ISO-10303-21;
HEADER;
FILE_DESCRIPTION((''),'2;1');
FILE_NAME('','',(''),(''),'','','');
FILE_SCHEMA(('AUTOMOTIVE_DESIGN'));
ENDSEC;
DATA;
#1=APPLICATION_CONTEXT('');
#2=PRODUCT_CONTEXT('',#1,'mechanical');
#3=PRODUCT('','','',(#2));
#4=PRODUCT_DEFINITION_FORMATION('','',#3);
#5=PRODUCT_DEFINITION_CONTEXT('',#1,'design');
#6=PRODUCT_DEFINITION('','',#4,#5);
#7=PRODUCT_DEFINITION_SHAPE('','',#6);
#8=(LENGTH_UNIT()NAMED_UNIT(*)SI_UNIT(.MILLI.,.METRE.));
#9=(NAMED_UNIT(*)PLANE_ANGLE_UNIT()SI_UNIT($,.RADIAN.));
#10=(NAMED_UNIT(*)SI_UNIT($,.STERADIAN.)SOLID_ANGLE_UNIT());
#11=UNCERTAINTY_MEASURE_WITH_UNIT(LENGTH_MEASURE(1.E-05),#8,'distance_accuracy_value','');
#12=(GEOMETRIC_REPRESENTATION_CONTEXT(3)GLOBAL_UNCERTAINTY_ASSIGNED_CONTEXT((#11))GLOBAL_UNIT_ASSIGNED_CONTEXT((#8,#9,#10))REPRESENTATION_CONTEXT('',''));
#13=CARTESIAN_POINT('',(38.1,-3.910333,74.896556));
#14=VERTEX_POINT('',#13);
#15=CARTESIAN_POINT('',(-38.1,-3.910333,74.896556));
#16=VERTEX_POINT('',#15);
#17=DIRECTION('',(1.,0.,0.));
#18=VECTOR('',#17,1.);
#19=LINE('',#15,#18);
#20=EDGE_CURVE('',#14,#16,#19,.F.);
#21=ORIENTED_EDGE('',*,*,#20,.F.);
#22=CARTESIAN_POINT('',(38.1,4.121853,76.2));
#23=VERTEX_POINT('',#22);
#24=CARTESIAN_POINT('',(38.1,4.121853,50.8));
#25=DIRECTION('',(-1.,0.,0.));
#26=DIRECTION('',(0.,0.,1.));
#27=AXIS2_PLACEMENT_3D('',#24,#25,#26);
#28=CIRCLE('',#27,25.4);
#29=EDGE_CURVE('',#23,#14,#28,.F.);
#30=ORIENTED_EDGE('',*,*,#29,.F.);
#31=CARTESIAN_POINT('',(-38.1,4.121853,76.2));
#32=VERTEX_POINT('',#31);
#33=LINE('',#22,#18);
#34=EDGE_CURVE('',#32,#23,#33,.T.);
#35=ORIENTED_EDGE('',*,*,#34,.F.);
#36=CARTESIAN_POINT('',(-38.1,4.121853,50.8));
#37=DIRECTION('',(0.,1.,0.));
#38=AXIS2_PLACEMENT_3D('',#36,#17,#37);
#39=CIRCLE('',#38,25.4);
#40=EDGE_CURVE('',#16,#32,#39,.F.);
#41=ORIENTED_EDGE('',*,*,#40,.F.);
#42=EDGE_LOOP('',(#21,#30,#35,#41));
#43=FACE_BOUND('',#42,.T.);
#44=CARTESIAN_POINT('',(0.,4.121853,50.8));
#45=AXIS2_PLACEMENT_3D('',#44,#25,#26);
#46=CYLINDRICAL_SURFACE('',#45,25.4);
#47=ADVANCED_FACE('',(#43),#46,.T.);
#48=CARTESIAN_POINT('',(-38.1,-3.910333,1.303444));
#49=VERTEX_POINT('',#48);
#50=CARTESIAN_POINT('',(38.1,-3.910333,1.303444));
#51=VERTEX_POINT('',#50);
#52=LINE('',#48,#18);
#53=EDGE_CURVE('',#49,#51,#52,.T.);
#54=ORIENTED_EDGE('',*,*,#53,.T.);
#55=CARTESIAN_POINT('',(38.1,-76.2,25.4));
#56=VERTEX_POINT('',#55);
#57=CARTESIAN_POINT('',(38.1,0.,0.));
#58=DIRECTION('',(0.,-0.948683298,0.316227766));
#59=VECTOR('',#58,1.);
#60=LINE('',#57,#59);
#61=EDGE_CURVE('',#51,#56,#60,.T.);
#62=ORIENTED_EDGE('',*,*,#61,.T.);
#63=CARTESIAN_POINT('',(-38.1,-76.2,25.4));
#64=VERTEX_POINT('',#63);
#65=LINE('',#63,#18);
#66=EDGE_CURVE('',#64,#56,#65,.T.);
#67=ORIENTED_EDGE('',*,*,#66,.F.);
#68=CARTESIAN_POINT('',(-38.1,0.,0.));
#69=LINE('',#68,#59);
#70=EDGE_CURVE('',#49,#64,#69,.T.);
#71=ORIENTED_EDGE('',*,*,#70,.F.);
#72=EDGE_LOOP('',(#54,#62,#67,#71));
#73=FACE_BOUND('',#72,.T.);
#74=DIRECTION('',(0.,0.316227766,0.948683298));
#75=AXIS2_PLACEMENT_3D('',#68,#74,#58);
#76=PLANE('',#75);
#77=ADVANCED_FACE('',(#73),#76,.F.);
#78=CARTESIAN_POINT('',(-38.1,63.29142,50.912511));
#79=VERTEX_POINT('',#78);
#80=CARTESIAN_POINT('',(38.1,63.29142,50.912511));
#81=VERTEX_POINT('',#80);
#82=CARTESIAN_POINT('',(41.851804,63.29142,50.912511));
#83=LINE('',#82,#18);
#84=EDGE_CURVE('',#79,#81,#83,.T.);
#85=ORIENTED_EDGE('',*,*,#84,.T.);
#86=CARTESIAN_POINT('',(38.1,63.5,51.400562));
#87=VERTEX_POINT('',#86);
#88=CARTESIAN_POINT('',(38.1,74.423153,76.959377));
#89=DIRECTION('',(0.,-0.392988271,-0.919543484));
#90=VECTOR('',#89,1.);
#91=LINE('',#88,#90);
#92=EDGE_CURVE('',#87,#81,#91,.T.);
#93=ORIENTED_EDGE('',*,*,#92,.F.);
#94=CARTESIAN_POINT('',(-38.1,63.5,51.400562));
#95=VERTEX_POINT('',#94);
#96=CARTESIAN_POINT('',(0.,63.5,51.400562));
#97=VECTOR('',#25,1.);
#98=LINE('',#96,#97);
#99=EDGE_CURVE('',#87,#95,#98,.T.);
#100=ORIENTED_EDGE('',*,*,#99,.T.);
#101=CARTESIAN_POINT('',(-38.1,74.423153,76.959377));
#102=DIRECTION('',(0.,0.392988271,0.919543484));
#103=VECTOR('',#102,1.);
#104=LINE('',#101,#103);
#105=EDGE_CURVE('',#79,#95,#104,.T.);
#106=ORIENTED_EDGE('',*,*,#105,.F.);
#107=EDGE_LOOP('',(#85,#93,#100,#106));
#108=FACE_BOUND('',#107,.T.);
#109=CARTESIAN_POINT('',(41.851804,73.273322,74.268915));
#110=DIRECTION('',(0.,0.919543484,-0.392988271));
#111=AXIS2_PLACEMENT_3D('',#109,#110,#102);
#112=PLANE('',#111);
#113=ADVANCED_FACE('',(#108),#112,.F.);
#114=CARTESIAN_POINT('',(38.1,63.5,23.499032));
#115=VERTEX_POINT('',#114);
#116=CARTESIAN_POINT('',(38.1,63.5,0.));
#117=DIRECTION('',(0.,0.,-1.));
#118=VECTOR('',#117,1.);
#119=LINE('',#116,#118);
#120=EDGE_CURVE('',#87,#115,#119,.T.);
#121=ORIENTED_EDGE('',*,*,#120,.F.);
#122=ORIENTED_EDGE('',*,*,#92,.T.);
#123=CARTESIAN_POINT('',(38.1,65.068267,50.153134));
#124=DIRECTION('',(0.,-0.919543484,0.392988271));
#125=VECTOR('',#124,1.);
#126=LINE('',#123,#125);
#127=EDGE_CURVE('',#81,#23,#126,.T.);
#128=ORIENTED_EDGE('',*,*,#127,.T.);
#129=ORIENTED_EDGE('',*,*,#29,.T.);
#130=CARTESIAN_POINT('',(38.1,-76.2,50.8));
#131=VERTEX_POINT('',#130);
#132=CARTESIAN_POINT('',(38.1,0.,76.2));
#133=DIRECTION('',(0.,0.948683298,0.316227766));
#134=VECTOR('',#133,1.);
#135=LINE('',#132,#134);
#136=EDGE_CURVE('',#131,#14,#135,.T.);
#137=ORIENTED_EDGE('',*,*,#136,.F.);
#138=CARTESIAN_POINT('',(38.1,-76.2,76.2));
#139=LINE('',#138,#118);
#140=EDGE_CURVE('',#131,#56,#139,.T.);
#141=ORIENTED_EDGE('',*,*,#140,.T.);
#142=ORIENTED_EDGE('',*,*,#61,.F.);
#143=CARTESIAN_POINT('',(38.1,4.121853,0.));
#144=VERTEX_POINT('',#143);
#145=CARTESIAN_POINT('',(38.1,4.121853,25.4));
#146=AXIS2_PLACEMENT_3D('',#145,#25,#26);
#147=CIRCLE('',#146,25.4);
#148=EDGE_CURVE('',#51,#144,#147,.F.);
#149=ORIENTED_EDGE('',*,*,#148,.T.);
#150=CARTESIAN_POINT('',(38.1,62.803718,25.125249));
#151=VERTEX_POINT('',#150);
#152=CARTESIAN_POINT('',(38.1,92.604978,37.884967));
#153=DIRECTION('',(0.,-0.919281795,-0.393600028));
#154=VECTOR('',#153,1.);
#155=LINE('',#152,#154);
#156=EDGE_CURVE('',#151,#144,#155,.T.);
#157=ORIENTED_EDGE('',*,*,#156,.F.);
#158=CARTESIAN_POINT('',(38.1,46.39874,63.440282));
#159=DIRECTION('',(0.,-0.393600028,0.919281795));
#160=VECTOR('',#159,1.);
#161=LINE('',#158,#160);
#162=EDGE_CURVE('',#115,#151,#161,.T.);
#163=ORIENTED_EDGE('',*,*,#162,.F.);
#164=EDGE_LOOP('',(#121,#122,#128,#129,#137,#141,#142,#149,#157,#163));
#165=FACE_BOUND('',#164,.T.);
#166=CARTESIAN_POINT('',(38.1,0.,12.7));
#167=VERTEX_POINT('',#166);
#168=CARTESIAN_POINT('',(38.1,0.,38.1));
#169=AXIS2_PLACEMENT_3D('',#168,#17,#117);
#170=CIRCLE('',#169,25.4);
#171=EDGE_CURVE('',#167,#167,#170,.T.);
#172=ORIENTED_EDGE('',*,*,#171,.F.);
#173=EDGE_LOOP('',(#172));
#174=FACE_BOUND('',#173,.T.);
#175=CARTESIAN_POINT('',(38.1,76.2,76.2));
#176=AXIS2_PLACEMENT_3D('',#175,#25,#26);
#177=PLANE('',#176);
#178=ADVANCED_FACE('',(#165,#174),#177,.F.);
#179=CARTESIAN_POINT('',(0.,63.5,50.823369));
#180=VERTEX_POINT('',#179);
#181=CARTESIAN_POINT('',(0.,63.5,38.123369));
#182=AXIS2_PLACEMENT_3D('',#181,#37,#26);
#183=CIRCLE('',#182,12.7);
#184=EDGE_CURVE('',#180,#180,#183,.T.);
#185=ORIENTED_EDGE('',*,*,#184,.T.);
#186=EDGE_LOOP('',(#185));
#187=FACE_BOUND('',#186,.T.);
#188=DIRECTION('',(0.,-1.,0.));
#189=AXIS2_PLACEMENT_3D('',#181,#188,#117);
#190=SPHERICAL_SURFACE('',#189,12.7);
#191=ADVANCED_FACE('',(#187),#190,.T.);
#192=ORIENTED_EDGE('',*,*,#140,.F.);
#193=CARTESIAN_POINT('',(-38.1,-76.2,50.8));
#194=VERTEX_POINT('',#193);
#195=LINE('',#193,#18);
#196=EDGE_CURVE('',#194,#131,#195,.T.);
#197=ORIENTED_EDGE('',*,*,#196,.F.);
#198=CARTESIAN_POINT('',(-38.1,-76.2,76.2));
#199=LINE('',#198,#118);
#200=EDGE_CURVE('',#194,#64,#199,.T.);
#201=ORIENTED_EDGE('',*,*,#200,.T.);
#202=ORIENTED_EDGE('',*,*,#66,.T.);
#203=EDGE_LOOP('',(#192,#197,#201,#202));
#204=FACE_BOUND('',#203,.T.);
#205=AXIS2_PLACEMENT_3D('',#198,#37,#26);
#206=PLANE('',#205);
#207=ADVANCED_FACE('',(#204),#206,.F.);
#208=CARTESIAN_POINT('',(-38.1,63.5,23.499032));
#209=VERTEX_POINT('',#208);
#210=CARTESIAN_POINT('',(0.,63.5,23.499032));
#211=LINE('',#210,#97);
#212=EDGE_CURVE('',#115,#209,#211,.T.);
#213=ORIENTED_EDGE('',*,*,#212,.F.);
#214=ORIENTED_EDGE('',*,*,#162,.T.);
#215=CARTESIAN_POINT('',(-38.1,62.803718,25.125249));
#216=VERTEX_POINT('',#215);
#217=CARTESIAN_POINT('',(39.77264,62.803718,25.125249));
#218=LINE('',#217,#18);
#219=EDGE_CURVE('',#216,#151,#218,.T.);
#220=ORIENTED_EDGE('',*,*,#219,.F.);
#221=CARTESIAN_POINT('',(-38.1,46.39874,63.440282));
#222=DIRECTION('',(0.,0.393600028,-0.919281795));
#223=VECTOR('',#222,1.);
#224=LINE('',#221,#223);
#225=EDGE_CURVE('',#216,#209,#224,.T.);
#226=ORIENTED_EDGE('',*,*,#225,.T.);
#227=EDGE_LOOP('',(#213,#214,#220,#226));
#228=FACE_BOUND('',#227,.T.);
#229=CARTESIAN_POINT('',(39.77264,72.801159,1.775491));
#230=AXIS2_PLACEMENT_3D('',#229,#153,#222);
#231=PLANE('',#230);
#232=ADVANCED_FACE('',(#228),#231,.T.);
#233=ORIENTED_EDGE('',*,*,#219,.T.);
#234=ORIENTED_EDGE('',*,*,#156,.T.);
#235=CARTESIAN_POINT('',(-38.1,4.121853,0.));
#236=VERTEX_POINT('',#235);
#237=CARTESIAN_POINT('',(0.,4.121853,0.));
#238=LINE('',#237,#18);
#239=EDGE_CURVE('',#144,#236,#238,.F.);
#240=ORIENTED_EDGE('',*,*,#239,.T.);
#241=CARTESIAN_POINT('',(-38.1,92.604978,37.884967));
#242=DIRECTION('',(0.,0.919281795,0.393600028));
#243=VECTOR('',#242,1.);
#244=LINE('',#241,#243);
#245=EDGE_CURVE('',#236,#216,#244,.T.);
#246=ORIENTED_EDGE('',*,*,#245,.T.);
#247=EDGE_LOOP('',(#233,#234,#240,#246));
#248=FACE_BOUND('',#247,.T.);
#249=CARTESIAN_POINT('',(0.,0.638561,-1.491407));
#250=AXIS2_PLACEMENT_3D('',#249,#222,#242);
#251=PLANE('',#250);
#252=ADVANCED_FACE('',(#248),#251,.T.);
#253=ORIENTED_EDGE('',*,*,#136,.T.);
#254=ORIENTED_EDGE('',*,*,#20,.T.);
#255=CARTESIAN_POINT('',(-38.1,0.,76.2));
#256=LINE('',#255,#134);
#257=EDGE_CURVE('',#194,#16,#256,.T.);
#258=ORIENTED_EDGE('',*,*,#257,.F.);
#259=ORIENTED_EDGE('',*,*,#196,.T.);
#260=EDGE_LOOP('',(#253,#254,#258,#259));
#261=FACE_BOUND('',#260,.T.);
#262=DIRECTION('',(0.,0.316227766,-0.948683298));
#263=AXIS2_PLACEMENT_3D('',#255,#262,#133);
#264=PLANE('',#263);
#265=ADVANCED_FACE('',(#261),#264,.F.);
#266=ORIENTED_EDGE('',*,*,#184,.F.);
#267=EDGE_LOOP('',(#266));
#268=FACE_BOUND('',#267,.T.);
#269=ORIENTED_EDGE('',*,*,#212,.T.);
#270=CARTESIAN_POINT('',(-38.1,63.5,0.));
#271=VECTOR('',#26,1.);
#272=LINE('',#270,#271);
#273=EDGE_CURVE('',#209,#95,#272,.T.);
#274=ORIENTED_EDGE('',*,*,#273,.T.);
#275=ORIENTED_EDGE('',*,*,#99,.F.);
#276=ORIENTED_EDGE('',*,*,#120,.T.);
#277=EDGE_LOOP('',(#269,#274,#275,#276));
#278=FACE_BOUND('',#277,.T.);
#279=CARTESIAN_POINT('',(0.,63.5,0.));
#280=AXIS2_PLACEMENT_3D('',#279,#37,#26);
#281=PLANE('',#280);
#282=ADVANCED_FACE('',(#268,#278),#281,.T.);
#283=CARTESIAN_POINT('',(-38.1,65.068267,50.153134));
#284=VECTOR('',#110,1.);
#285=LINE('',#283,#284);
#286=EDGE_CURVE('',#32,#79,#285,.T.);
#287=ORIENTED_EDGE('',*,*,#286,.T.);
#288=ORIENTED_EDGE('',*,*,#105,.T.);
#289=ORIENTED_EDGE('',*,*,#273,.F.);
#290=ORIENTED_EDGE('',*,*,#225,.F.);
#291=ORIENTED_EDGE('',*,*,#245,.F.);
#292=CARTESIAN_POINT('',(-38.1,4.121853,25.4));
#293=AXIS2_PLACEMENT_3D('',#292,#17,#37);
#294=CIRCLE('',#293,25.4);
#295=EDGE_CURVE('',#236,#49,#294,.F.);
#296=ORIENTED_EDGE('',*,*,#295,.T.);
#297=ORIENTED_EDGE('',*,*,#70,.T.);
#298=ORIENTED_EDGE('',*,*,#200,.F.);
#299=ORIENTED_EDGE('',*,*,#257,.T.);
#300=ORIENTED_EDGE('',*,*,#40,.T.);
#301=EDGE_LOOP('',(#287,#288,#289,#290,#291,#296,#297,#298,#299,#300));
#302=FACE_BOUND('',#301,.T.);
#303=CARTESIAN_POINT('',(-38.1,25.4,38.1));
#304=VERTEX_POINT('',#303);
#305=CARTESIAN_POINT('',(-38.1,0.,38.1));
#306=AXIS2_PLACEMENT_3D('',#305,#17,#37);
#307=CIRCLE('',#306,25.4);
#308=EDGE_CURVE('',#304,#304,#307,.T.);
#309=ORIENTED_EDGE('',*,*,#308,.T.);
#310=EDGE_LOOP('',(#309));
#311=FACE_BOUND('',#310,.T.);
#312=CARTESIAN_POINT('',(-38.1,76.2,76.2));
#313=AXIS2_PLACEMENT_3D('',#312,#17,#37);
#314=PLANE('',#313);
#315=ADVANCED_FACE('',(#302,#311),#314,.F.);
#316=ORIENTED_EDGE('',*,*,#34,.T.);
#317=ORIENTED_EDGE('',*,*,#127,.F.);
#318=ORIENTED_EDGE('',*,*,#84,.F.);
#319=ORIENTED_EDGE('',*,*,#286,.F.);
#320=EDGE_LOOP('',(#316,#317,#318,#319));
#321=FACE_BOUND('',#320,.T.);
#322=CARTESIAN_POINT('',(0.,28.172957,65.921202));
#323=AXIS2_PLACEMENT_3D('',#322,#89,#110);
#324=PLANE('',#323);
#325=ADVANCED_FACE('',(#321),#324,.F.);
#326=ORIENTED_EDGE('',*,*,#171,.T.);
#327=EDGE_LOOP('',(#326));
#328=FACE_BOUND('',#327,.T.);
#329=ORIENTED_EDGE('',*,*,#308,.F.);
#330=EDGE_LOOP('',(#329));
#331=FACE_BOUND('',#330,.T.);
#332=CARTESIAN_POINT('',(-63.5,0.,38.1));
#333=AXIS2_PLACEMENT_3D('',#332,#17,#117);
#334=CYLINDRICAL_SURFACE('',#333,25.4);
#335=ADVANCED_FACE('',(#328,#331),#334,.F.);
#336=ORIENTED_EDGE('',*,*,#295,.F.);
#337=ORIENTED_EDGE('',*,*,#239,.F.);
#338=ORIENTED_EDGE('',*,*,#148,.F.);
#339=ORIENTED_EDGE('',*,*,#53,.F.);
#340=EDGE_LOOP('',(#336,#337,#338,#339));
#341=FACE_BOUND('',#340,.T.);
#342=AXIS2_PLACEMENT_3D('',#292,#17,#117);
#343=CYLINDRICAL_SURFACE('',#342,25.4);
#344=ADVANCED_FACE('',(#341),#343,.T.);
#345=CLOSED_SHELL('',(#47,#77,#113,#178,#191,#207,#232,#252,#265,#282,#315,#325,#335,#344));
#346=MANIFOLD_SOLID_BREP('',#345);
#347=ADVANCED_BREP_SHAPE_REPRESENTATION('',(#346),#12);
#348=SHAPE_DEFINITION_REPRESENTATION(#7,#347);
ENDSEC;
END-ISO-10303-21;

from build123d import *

# Parameters (mm, degrees)
SKETCH1_W           = 76.2
SKETCH1_H           = 152.4
BOSS_EXTRUDE1_DEPTH = 76.2
SKETCH2_R           = 25.4
CUT_EXTRUDE1_DEPTH  = 101.6
CUT_EXTRUDE2_DEPTH  = 132.982271537
FILLET1_R           = 25.4
SKETCH4_W           = 76.2
SKETCH4_H           = 76.2
SKETCH4_R           = 12.7
CUT_EXTRUDE3_DEPTH  = 12.7
FILLET2_R           = 12.7
SKETCH6_W           = 83.912866254
SKETCH6_H           = 103.792472971
CUT_EXTRUDE4_DEPTH  = 25.4
SKETCH7_W           = 80.804571494
SKETCH7_H           = 97.595131804
CUT_EXTRUDE5_DEPTH  = 25.4


with BuildPart() as part:
    # Sketch1 → Boss-Extrude1 (new body)
    with BuildSketch(Plane.XY):
        Rectangle(SKETCH1_W, SKETCH1_H)
    extrude(amount=BOSS_EXTRUDE1_DEPTH)

    # Sketch2 → Cut-Extrude1 (cut)
    with BuildSketch(Plane(origin=(38.1, 0, 0), x_dir=(0, 0, -1), z_dir=(1, 0, 0))):
        with Locations((-38.1, 0)):
            Circle(SKETCH2_R)
    extrude(amount=-CUT_EXTRUDE1_DEPTH, mode=Mode.SUBTRACT)

    # Sketch3 → Cut-Extrude2 (cut, through all)
    with BuildSketch(Plane(origin=(38.1, 0, 0), x_dir=(0, 0, -1), z_dir=(1, 0, 0))):
        Polygon((-76.2, 0), (-50.8, -76.2), (-76.2, -76.2), align=None)
        Polygon((0, 0), (-25.4, -76.2), (0, -76.2), align=None)
    extrude(amount=-CUT_EXTRUDE2_DEPTH, mode=Mode.SUBTRACT)

    # Fillet1
    fillet1_edges = [part.edges().sort_by_distance(p)[0] for p in [
        (0, 0, 76.2),
        (0, 0, 0),
    ]]
    fillet(fillet1_edges, radius=FILLET1_R)

    # Sketch4 → Cut-Extrude3 (cut)
    with BuildSketch(Plane(origin=(0, 76.2, 0), x_dir=(1, 0, 0), z_dir=(0, 1, 0))):
        with Locations((0, -38.1)):
            Rectangle(SKETCH4_W, SKETCH4_H)
        with Locations(Location((0, -38.123369208, 0), (0, 0, 270))):
            Circle(SKETCH4_R, mode=Mode.SUBTRACT)
    extrude(amount=-CUT_EXTRUDE3_DEPTH, mode=Mode.SUBTRACT)

    # Fillet2
    fillet2_edges = [part.edges().sort_by_distance(p)[0] for p in [
        (0, 76.2, 25.423369208),
    ]]
    fillet(fillet2_edges, radius=FILLET2_R - 0.0001)  # a hair under: the kernel refuses the full size

    # Sketch6 → Cut-Extrude4 (cut)
    with BuildSketch(Plane(origin=(0, 28.172957058, 65.921201736), x_dir=(-1, 0, 0), z_dir=(0, -0.3929882709190667, -0.9195434839745439))):
        with Locations((0.104629509, -13.705043198)):
            Rectangle(SKETCH6_W, SKETCH6_H)
    extrude(amount=-CUT_EXTRUDE4_DEPTH, mode=Mode.SUBTRACT)

    # Sketch7 → Cut-Extrude5 (cut)
    with BuildSketch(Plane(origin=(0, 0.638561447, -1.491407194), x_dir=(-1, 0, 0), z_dir=(0, 0.39360002771646513, -0.9192817947624101))):
        with Locations((0.629646012, 18.826047721)):
            Rectangle(SKETCH7_W, SKETCH7_H)
    extrude(amount=CUT_EXTRUDE5_DEPTH, mode=Mode.SUBTRACT)


solid = part.part
